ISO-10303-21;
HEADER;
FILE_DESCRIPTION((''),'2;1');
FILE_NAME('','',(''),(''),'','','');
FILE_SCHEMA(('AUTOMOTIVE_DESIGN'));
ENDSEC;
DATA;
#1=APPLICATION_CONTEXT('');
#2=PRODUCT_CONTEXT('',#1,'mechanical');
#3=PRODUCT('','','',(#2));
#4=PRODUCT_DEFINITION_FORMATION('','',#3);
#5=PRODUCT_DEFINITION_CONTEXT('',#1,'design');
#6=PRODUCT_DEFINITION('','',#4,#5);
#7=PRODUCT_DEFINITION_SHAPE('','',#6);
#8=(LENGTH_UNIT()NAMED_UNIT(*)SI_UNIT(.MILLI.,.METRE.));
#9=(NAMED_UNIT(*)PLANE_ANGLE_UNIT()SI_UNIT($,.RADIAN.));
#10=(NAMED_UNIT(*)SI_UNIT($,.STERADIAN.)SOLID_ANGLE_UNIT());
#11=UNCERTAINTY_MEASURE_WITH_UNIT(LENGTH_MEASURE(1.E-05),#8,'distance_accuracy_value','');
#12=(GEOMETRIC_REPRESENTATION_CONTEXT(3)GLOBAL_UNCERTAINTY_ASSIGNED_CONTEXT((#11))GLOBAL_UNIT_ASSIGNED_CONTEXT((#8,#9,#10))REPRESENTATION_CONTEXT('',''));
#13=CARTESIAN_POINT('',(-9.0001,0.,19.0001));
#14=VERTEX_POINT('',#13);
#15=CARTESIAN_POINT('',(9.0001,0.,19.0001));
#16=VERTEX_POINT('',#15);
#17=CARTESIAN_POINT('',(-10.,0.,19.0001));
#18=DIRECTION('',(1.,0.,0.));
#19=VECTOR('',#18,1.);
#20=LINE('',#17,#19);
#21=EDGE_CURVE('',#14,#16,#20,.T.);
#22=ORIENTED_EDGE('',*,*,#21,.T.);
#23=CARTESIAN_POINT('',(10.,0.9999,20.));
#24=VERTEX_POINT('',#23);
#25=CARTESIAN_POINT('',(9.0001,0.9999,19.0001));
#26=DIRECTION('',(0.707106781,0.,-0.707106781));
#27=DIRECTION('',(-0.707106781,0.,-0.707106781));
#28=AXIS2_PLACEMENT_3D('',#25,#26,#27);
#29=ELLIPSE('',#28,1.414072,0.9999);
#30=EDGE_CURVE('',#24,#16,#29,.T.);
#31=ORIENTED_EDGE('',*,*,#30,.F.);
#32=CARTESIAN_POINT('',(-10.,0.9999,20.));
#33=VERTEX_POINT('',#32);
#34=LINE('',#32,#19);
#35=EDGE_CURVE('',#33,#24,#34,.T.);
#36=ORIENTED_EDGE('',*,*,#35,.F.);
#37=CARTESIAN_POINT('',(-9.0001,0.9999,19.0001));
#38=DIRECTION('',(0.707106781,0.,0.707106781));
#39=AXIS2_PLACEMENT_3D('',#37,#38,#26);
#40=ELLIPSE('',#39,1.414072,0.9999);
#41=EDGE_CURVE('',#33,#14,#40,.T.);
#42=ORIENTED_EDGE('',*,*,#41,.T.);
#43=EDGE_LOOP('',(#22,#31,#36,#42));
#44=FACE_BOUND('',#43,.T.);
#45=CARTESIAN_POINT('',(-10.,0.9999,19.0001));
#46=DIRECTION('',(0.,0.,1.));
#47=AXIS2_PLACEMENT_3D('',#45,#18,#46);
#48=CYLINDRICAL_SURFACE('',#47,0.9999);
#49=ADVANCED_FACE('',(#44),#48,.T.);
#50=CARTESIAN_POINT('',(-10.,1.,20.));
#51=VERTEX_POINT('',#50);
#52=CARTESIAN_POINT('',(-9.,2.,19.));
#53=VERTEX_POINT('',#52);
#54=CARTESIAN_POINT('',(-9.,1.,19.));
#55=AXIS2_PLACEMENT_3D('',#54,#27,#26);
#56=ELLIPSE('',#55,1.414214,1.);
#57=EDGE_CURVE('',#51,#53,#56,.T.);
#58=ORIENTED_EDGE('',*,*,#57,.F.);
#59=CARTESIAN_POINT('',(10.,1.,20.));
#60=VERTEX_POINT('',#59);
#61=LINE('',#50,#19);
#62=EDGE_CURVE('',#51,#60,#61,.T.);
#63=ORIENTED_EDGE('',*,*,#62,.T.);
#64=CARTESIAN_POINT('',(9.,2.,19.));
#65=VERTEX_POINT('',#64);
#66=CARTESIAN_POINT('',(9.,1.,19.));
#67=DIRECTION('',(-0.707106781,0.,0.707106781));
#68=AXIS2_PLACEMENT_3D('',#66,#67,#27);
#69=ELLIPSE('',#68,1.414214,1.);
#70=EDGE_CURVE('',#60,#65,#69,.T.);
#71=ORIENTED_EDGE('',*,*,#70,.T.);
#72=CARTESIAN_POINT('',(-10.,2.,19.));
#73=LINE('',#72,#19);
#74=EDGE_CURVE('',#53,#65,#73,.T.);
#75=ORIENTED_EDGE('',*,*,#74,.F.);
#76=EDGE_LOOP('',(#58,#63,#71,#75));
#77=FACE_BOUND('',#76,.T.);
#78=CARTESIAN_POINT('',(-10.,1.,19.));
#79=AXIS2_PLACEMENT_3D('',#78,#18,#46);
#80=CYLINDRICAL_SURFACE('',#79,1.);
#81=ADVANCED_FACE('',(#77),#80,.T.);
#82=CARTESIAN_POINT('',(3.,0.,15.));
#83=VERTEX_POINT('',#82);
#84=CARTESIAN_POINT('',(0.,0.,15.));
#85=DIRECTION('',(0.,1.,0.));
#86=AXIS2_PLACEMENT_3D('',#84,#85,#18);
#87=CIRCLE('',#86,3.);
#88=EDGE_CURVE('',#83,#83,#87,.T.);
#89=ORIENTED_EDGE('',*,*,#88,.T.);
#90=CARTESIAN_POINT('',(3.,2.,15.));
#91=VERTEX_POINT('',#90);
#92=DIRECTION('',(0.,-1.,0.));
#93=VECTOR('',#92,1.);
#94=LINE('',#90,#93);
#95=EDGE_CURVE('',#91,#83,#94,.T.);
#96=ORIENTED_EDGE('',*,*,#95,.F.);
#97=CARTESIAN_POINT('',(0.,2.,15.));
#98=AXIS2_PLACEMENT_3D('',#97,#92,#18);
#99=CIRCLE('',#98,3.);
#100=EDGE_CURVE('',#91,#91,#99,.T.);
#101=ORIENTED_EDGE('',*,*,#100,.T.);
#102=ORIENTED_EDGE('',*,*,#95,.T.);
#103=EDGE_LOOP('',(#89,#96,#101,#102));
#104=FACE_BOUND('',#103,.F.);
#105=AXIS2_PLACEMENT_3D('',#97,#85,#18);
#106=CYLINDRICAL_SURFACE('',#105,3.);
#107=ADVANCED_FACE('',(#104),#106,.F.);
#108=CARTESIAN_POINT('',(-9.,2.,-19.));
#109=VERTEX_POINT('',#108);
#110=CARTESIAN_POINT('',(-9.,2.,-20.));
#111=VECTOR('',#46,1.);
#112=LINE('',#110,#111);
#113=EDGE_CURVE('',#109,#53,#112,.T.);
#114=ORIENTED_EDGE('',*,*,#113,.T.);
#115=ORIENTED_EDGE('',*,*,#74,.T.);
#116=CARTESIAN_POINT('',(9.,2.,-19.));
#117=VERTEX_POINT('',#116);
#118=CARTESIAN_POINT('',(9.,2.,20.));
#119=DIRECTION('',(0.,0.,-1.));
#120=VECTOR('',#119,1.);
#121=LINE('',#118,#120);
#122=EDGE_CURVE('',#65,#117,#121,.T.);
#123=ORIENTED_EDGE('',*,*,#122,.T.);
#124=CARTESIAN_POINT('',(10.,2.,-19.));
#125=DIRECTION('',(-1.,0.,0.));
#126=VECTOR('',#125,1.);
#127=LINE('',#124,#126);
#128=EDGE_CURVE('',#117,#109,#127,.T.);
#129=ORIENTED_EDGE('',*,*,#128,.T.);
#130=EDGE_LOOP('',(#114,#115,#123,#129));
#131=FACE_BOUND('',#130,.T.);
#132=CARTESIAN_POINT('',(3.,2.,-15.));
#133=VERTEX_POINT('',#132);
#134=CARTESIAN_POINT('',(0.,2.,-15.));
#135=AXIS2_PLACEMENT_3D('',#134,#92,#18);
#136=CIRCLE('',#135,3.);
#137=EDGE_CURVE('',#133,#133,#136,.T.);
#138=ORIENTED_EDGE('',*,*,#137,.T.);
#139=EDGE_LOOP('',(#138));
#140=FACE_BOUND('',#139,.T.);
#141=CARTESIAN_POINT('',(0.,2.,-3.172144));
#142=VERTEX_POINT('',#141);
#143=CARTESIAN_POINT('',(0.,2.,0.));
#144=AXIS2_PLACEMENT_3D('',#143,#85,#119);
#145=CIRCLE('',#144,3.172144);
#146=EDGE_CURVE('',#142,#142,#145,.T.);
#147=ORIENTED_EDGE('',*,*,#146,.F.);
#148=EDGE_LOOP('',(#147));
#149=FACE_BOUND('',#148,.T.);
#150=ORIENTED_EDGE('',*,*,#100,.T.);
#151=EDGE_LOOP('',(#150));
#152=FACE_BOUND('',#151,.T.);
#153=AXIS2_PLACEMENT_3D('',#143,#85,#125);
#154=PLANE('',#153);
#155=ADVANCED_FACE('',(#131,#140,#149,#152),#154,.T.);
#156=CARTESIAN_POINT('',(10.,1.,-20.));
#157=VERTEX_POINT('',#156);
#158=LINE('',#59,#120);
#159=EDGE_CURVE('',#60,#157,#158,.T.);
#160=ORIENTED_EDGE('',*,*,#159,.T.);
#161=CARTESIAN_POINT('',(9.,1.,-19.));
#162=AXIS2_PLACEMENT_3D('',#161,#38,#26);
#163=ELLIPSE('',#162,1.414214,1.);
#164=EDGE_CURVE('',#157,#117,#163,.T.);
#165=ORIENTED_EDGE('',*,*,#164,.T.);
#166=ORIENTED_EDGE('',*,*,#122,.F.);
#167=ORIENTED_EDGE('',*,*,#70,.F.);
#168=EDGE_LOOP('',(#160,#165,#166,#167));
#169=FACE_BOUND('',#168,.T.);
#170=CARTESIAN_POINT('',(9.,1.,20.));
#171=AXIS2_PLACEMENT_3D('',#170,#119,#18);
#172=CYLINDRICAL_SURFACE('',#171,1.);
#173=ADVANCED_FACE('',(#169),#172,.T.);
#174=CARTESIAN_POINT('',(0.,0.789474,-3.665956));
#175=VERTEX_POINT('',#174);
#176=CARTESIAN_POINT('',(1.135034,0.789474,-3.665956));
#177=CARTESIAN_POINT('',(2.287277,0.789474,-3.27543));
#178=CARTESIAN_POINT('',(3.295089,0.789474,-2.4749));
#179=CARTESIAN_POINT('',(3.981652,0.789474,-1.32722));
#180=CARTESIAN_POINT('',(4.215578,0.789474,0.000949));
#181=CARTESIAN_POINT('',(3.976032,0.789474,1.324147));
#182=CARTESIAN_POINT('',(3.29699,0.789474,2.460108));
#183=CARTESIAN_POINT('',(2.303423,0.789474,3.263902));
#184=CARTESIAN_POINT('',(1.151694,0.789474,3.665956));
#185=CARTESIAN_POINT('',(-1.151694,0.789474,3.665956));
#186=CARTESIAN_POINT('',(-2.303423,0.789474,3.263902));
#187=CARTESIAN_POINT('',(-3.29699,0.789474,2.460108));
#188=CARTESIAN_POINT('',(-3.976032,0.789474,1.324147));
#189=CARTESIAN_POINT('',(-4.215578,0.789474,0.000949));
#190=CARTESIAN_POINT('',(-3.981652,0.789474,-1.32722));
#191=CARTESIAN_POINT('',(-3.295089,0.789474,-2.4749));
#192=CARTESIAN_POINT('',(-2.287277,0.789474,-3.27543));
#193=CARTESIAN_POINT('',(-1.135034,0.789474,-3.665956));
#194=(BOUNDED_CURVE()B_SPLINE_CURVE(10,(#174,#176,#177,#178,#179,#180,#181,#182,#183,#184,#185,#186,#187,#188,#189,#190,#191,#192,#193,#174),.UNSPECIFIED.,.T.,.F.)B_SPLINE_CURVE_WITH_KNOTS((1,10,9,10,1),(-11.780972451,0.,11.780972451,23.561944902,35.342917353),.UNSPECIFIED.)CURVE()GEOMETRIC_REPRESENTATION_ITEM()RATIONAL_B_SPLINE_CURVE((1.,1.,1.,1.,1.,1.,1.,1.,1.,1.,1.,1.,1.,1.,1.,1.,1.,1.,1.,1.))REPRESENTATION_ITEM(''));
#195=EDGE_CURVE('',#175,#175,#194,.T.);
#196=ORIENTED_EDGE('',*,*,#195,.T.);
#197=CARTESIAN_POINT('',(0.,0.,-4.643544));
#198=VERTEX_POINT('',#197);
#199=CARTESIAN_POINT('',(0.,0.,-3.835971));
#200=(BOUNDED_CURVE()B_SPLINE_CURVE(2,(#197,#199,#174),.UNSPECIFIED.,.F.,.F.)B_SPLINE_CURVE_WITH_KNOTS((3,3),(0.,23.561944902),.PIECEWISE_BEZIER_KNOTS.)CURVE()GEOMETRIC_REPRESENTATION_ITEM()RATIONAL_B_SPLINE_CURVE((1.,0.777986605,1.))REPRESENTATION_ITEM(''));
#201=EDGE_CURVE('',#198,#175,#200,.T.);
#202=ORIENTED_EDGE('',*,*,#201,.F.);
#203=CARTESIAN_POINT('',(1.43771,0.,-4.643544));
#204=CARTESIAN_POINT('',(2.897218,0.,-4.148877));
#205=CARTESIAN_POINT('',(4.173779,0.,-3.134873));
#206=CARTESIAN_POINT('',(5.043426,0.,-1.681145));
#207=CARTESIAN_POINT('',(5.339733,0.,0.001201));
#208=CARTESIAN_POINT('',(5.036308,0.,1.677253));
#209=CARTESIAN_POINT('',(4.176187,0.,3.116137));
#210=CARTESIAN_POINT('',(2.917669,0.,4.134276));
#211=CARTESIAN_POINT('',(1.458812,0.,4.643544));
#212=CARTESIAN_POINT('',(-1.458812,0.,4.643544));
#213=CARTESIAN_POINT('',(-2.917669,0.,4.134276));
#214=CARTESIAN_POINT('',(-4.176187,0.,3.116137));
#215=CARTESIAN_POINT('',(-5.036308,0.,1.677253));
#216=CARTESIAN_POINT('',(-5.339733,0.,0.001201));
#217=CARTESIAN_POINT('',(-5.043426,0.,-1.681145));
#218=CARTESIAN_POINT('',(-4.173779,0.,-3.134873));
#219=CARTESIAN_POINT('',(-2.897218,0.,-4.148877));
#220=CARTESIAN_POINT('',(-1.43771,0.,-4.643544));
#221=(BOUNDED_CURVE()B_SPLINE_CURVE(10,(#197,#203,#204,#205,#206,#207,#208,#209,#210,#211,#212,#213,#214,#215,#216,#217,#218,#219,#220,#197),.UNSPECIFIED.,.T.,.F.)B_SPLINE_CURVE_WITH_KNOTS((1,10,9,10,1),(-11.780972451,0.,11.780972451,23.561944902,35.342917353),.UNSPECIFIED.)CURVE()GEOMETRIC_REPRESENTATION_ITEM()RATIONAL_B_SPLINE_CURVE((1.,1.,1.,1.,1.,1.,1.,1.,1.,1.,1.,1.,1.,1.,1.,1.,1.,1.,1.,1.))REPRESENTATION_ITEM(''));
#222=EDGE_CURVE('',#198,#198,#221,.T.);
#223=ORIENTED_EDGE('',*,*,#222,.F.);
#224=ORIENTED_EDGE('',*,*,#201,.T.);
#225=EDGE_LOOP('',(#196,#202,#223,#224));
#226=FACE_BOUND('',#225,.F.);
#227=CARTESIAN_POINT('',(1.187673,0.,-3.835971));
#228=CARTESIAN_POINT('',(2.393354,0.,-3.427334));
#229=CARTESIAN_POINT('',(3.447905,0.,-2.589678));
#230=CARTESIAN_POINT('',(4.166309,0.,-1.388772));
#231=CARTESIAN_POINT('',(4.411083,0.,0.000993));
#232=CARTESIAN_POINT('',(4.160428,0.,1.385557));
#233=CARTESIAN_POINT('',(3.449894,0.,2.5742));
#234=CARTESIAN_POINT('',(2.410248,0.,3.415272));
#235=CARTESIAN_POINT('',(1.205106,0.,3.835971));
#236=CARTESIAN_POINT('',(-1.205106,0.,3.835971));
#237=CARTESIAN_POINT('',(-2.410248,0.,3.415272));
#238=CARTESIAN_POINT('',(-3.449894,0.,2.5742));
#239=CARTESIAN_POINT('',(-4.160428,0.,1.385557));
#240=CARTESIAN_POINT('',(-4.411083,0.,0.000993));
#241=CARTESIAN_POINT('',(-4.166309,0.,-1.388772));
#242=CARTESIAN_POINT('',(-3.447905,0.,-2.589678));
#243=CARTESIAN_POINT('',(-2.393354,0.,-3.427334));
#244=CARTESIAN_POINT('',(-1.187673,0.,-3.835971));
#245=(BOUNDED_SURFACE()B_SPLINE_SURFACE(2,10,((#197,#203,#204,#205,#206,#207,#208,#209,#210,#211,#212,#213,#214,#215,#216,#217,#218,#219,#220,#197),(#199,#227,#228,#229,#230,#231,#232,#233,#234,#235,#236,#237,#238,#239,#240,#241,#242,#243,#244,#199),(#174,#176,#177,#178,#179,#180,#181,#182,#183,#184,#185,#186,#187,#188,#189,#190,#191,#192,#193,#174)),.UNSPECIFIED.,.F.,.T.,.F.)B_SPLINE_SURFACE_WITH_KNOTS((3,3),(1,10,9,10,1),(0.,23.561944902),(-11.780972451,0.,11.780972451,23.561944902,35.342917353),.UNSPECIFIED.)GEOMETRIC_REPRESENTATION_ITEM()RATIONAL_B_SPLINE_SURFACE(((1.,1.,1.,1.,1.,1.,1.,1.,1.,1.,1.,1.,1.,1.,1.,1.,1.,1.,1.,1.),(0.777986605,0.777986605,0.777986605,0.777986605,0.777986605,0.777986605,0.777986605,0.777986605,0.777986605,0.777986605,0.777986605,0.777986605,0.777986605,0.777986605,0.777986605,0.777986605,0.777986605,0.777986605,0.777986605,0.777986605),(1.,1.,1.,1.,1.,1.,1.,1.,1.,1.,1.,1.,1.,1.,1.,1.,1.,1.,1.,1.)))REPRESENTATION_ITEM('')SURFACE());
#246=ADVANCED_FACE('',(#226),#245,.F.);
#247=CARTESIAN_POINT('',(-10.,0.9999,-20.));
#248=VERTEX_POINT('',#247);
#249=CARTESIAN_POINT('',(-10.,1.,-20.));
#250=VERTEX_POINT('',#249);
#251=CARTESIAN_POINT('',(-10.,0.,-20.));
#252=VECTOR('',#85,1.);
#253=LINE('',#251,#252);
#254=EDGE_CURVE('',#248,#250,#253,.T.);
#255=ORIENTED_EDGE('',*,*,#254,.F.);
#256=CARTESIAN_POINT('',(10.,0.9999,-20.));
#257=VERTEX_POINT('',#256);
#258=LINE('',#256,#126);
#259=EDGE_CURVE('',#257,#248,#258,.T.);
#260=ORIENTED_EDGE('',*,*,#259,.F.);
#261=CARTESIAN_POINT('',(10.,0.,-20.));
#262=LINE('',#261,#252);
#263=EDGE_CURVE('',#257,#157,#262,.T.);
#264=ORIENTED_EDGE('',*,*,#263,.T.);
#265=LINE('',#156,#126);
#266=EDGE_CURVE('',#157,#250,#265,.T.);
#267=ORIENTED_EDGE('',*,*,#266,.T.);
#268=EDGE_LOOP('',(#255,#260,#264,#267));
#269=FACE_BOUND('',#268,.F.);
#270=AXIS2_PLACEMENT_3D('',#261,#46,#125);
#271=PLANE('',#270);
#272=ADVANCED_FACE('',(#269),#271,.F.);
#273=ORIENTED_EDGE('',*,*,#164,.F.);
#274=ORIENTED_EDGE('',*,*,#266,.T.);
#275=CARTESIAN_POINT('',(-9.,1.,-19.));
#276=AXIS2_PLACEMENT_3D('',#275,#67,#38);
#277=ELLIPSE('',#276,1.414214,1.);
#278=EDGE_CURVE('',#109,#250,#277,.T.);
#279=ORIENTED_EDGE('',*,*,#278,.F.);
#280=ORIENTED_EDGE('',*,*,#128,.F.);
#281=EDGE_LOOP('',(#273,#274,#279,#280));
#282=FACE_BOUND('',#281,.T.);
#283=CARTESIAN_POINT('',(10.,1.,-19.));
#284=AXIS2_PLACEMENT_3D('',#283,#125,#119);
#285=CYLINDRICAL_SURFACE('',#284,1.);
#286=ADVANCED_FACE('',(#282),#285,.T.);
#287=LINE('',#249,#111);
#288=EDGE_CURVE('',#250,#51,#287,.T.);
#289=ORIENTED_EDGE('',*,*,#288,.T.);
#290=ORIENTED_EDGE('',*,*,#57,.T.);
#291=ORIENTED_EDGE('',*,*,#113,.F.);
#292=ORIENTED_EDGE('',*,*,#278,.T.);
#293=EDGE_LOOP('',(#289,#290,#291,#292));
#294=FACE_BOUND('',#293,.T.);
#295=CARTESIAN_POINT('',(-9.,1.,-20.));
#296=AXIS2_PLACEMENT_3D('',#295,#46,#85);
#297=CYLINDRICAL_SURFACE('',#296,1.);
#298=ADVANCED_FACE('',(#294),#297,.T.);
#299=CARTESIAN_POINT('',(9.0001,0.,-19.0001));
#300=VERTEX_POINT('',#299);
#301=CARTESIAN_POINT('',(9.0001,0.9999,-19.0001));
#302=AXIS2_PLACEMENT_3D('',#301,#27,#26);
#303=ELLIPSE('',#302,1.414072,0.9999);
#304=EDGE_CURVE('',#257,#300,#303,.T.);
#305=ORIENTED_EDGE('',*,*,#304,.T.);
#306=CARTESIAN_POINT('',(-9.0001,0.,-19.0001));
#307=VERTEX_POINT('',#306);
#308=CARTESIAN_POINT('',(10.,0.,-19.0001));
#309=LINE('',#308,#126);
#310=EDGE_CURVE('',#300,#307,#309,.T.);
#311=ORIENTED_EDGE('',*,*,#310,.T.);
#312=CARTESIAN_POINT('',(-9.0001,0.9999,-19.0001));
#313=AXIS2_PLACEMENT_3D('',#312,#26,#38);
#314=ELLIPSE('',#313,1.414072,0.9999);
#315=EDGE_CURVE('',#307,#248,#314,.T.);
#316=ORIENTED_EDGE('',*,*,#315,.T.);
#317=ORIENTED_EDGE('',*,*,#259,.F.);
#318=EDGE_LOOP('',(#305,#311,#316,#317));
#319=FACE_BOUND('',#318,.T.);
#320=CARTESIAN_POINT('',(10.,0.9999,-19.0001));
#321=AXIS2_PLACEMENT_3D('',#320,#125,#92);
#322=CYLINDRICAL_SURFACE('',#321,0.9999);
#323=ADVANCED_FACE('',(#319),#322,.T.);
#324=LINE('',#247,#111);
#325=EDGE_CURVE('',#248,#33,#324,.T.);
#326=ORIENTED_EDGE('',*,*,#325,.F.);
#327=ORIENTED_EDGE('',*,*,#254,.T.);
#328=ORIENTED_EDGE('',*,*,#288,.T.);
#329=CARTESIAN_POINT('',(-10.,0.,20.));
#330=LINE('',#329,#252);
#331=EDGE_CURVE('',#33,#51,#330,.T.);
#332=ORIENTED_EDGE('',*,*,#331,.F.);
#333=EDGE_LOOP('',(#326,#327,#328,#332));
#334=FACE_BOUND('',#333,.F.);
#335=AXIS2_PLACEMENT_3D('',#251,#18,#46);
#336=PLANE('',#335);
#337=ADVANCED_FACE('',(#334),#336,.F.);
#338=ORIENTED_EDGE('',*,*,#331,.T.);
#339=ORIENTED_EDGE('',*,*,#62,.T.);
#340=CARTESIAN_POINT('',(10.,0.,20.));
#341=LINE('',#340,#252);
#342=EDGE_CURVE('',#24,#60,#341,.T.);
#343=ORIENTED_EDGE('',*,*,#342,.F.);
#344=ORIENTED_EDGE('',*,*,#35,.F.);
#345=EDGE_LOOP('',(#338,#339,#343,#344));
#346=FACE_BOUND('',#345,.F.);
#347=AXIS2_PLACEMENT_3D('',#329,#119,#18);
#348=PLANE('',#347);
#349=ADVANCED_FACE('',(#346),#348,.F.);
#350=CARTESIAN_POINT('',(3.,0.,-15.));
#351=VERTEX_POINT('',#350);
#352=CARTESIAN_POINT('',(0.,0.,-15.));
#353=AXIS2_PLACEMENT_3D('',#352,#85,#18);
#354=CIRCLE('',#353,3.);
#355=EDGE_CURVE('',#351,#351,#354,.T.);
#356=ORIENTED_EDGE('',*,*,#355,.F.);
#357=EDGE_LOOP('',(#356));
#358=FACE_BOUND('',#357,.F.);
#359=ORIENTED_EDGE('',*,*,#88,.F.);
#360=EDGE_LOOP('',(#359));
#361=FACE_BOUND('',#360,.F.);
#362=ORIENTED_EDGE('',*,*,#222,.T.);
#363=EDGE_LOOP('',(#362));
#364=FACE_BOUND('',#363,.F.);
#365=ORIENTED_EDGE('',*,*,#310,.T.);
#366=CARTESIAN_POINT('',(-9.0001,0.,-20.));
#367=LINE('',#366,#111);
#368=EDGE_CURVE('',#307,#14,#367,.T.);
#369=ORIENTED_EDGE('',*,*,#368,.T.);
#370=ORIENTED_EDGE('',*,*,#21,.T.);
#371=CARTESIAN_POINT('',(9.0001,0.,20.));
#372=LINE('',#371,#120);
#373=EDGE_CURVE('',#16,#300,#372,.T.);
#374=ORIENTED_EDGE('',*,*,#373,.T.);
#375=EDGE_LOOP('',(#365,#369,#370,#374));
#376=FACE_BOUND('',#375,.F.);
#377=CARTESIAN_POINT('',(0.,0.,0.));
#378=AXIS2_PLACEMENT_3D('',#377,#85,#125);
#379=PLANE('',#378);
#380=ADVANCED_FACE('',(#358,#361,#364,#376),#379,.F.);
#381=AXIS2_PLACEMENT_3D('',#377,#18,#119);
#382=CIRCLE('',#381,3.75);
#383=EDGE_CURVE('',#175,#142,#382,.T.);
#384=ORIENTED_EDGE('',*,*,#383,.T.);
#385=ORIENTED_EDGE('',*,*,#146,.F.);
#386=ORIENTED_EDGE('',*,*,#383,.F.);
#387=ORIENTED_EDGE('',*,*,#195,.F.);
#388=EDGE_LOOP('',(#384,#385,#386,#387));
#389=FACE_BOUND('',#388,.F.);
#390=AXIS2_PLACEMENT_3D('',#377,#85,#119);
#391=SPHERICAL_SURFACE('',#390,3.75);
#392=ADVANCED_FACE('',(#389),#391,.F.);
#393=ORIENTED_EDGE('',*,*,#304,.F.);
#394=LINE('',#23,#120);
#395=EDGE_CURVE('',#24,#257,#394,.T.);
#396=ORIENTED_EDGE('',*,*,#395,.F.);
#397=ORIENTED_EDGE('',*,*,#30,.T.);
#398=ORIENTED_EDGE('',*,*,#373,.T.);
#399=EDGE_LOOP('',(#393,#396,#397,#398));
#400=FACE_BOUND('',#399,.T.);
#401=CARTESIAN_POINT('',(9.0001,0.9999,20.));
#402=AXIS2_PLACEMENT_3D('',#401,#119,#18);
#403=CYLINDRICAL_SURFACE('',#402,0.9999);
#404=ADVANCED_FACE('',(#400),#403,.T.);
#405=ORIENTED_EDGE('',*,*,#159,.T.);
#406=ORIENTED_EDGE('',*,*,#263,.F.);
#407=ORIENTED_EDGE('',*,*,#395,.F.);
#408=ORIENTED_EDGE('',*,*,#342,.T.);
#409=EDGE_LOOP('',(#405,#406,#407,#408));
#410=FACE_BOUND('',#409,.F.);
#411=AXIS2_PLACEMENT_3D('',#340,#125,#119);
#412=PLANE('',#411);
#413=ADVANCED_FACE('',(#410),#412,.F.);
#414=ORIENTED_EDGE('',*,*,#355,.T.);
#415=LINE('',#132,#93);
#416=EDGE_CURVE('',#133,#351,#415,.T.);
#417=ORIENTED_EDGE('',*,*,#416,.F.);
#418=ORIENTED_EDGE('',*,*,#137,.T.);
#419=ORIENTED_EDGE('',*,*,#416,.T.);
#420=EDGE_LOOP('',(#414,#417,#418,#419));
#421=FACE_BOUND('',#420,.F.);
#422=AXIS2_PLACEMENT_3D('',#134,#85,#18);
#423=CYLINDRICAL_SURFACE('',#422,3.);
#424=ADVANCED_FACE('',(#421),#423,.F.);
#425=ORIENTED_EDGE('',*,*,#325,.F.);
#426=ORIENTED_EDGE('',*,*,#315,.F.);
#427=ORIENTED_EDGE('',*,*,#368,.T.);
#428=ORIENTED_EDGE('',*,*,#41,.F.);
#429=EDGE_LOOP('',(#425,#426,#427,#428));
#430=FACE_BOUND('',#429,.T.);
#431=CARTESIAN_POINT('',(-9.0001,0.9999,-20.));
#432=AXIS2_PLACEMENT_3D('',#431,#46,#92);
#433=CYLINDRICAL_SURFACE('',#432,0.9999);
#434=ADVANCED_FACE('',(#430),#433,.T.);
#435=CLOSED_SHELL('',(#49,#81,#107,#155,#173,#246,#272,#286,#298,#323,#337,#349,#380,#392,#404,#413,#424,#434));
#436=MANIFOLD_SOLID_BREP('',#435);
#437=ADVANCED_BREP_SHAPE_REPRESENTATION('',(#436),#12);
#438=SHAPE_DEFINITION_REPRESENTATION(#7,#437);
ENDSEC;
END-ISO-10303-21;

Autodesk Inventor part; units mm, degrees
ref_plane "YZ Plane" through (0, 0, 0) normal (1, 0, 0) x (0, 1, 0)
ref_plane "XZ Plane" through (0, 0, 0) normal (0, 1, 0) x (-1, 0, 0)
sketch "Sketch1" plane through (0, 0, 0) normal (0, 1, 0) x (-1, 0, 0)
  line L0 (-10, -20) -> (10, -20)
  line L1 (10, -20) -> (10, 20)
  line L2 (10, 20) -> (-10, 20)
  line L3 (-10, 20) -> (-10, -20)
  line L4 (-10, -20) -> (10, 20) construction
  line L5 (10, -20) -> (-10, 20) construction
  point P0 (0, 0)
  dimension "d0" = 20
  dimension "d1" = 40
extrude "Extrusion1" add sketch "Sketch1" along normal blind 2
ref_plane "Work Plane1" through (0, 0, 20) normal (1, 0, 0) x (0, 0, -1)
sketch "Sketch3" plane through (0, 0, 20) normal (1, 0, 0) x (0, 0, -1)
  line L0 (40, 0) -> (40, 2) projected
  line L1 (40, 0) -> (20, 0)
  line L2 (40, 0) -> (0, 0) projected
  line L3 (20, 0) -> (20, -3.75)
  line L4 (20, 0) -> (23.75, 0) construction
  arc A0 (23.75, 0) -> (20, 3.75) centre (20, 0) ccw
  line L5 (20, 3.75) -> (20, 0)
  line L6 (20, 0) -> (23.75, 0)
  point P0 (20, 0)
  dimension "d5" = 20
  dimension "d6" = 3.75
  dimension "d7" = 90
  dimension "d8" = 3.75
revolve "Revolution1" cut sketch "Sketch3" angle 360 about axis through (0, 3.75, 0) along (0, -1, 0)
pattern_of_one "Rectangular Pattern1"
sketch "Sketch4" plane through (0, 2, 0) normal (0, 1, 0) x (1, 0, 0)
  line L0 (-10, -20) -> (10, -20) projected
  line L1 (0, -20) -> (0, -15)
  line L2 (10, 20) -> (-10, 20) projected
  line L3 (0, 20) -> (0, 15)
  circle A0 centre (0, -15) radius 3
  circle A1 centre (0, 15) radius 3
  point P0 (0, 0)
  dimension "d16" = 5
  dimension "d17" = 5
  dimension "d18" = 6
  dimension "d19" = 6
extrude "Extrusion2" cut sketch "Sketch4" against normal through all
fillet "Fillet1" radius 1 4 edges at (10, 2, 0) (0, 2, 20) (-10, 2, 0) (0, 2, -20)
fillet "Fillet2" radius 1 4 edges at (10, 0, 0) (0, 0, 20) (-10, 0, 0) (0, 0, -20)
fillet "Fillet3" radius 1 1 edges at (0, 0, 3.75)
properties part number "TestBearingTop"
